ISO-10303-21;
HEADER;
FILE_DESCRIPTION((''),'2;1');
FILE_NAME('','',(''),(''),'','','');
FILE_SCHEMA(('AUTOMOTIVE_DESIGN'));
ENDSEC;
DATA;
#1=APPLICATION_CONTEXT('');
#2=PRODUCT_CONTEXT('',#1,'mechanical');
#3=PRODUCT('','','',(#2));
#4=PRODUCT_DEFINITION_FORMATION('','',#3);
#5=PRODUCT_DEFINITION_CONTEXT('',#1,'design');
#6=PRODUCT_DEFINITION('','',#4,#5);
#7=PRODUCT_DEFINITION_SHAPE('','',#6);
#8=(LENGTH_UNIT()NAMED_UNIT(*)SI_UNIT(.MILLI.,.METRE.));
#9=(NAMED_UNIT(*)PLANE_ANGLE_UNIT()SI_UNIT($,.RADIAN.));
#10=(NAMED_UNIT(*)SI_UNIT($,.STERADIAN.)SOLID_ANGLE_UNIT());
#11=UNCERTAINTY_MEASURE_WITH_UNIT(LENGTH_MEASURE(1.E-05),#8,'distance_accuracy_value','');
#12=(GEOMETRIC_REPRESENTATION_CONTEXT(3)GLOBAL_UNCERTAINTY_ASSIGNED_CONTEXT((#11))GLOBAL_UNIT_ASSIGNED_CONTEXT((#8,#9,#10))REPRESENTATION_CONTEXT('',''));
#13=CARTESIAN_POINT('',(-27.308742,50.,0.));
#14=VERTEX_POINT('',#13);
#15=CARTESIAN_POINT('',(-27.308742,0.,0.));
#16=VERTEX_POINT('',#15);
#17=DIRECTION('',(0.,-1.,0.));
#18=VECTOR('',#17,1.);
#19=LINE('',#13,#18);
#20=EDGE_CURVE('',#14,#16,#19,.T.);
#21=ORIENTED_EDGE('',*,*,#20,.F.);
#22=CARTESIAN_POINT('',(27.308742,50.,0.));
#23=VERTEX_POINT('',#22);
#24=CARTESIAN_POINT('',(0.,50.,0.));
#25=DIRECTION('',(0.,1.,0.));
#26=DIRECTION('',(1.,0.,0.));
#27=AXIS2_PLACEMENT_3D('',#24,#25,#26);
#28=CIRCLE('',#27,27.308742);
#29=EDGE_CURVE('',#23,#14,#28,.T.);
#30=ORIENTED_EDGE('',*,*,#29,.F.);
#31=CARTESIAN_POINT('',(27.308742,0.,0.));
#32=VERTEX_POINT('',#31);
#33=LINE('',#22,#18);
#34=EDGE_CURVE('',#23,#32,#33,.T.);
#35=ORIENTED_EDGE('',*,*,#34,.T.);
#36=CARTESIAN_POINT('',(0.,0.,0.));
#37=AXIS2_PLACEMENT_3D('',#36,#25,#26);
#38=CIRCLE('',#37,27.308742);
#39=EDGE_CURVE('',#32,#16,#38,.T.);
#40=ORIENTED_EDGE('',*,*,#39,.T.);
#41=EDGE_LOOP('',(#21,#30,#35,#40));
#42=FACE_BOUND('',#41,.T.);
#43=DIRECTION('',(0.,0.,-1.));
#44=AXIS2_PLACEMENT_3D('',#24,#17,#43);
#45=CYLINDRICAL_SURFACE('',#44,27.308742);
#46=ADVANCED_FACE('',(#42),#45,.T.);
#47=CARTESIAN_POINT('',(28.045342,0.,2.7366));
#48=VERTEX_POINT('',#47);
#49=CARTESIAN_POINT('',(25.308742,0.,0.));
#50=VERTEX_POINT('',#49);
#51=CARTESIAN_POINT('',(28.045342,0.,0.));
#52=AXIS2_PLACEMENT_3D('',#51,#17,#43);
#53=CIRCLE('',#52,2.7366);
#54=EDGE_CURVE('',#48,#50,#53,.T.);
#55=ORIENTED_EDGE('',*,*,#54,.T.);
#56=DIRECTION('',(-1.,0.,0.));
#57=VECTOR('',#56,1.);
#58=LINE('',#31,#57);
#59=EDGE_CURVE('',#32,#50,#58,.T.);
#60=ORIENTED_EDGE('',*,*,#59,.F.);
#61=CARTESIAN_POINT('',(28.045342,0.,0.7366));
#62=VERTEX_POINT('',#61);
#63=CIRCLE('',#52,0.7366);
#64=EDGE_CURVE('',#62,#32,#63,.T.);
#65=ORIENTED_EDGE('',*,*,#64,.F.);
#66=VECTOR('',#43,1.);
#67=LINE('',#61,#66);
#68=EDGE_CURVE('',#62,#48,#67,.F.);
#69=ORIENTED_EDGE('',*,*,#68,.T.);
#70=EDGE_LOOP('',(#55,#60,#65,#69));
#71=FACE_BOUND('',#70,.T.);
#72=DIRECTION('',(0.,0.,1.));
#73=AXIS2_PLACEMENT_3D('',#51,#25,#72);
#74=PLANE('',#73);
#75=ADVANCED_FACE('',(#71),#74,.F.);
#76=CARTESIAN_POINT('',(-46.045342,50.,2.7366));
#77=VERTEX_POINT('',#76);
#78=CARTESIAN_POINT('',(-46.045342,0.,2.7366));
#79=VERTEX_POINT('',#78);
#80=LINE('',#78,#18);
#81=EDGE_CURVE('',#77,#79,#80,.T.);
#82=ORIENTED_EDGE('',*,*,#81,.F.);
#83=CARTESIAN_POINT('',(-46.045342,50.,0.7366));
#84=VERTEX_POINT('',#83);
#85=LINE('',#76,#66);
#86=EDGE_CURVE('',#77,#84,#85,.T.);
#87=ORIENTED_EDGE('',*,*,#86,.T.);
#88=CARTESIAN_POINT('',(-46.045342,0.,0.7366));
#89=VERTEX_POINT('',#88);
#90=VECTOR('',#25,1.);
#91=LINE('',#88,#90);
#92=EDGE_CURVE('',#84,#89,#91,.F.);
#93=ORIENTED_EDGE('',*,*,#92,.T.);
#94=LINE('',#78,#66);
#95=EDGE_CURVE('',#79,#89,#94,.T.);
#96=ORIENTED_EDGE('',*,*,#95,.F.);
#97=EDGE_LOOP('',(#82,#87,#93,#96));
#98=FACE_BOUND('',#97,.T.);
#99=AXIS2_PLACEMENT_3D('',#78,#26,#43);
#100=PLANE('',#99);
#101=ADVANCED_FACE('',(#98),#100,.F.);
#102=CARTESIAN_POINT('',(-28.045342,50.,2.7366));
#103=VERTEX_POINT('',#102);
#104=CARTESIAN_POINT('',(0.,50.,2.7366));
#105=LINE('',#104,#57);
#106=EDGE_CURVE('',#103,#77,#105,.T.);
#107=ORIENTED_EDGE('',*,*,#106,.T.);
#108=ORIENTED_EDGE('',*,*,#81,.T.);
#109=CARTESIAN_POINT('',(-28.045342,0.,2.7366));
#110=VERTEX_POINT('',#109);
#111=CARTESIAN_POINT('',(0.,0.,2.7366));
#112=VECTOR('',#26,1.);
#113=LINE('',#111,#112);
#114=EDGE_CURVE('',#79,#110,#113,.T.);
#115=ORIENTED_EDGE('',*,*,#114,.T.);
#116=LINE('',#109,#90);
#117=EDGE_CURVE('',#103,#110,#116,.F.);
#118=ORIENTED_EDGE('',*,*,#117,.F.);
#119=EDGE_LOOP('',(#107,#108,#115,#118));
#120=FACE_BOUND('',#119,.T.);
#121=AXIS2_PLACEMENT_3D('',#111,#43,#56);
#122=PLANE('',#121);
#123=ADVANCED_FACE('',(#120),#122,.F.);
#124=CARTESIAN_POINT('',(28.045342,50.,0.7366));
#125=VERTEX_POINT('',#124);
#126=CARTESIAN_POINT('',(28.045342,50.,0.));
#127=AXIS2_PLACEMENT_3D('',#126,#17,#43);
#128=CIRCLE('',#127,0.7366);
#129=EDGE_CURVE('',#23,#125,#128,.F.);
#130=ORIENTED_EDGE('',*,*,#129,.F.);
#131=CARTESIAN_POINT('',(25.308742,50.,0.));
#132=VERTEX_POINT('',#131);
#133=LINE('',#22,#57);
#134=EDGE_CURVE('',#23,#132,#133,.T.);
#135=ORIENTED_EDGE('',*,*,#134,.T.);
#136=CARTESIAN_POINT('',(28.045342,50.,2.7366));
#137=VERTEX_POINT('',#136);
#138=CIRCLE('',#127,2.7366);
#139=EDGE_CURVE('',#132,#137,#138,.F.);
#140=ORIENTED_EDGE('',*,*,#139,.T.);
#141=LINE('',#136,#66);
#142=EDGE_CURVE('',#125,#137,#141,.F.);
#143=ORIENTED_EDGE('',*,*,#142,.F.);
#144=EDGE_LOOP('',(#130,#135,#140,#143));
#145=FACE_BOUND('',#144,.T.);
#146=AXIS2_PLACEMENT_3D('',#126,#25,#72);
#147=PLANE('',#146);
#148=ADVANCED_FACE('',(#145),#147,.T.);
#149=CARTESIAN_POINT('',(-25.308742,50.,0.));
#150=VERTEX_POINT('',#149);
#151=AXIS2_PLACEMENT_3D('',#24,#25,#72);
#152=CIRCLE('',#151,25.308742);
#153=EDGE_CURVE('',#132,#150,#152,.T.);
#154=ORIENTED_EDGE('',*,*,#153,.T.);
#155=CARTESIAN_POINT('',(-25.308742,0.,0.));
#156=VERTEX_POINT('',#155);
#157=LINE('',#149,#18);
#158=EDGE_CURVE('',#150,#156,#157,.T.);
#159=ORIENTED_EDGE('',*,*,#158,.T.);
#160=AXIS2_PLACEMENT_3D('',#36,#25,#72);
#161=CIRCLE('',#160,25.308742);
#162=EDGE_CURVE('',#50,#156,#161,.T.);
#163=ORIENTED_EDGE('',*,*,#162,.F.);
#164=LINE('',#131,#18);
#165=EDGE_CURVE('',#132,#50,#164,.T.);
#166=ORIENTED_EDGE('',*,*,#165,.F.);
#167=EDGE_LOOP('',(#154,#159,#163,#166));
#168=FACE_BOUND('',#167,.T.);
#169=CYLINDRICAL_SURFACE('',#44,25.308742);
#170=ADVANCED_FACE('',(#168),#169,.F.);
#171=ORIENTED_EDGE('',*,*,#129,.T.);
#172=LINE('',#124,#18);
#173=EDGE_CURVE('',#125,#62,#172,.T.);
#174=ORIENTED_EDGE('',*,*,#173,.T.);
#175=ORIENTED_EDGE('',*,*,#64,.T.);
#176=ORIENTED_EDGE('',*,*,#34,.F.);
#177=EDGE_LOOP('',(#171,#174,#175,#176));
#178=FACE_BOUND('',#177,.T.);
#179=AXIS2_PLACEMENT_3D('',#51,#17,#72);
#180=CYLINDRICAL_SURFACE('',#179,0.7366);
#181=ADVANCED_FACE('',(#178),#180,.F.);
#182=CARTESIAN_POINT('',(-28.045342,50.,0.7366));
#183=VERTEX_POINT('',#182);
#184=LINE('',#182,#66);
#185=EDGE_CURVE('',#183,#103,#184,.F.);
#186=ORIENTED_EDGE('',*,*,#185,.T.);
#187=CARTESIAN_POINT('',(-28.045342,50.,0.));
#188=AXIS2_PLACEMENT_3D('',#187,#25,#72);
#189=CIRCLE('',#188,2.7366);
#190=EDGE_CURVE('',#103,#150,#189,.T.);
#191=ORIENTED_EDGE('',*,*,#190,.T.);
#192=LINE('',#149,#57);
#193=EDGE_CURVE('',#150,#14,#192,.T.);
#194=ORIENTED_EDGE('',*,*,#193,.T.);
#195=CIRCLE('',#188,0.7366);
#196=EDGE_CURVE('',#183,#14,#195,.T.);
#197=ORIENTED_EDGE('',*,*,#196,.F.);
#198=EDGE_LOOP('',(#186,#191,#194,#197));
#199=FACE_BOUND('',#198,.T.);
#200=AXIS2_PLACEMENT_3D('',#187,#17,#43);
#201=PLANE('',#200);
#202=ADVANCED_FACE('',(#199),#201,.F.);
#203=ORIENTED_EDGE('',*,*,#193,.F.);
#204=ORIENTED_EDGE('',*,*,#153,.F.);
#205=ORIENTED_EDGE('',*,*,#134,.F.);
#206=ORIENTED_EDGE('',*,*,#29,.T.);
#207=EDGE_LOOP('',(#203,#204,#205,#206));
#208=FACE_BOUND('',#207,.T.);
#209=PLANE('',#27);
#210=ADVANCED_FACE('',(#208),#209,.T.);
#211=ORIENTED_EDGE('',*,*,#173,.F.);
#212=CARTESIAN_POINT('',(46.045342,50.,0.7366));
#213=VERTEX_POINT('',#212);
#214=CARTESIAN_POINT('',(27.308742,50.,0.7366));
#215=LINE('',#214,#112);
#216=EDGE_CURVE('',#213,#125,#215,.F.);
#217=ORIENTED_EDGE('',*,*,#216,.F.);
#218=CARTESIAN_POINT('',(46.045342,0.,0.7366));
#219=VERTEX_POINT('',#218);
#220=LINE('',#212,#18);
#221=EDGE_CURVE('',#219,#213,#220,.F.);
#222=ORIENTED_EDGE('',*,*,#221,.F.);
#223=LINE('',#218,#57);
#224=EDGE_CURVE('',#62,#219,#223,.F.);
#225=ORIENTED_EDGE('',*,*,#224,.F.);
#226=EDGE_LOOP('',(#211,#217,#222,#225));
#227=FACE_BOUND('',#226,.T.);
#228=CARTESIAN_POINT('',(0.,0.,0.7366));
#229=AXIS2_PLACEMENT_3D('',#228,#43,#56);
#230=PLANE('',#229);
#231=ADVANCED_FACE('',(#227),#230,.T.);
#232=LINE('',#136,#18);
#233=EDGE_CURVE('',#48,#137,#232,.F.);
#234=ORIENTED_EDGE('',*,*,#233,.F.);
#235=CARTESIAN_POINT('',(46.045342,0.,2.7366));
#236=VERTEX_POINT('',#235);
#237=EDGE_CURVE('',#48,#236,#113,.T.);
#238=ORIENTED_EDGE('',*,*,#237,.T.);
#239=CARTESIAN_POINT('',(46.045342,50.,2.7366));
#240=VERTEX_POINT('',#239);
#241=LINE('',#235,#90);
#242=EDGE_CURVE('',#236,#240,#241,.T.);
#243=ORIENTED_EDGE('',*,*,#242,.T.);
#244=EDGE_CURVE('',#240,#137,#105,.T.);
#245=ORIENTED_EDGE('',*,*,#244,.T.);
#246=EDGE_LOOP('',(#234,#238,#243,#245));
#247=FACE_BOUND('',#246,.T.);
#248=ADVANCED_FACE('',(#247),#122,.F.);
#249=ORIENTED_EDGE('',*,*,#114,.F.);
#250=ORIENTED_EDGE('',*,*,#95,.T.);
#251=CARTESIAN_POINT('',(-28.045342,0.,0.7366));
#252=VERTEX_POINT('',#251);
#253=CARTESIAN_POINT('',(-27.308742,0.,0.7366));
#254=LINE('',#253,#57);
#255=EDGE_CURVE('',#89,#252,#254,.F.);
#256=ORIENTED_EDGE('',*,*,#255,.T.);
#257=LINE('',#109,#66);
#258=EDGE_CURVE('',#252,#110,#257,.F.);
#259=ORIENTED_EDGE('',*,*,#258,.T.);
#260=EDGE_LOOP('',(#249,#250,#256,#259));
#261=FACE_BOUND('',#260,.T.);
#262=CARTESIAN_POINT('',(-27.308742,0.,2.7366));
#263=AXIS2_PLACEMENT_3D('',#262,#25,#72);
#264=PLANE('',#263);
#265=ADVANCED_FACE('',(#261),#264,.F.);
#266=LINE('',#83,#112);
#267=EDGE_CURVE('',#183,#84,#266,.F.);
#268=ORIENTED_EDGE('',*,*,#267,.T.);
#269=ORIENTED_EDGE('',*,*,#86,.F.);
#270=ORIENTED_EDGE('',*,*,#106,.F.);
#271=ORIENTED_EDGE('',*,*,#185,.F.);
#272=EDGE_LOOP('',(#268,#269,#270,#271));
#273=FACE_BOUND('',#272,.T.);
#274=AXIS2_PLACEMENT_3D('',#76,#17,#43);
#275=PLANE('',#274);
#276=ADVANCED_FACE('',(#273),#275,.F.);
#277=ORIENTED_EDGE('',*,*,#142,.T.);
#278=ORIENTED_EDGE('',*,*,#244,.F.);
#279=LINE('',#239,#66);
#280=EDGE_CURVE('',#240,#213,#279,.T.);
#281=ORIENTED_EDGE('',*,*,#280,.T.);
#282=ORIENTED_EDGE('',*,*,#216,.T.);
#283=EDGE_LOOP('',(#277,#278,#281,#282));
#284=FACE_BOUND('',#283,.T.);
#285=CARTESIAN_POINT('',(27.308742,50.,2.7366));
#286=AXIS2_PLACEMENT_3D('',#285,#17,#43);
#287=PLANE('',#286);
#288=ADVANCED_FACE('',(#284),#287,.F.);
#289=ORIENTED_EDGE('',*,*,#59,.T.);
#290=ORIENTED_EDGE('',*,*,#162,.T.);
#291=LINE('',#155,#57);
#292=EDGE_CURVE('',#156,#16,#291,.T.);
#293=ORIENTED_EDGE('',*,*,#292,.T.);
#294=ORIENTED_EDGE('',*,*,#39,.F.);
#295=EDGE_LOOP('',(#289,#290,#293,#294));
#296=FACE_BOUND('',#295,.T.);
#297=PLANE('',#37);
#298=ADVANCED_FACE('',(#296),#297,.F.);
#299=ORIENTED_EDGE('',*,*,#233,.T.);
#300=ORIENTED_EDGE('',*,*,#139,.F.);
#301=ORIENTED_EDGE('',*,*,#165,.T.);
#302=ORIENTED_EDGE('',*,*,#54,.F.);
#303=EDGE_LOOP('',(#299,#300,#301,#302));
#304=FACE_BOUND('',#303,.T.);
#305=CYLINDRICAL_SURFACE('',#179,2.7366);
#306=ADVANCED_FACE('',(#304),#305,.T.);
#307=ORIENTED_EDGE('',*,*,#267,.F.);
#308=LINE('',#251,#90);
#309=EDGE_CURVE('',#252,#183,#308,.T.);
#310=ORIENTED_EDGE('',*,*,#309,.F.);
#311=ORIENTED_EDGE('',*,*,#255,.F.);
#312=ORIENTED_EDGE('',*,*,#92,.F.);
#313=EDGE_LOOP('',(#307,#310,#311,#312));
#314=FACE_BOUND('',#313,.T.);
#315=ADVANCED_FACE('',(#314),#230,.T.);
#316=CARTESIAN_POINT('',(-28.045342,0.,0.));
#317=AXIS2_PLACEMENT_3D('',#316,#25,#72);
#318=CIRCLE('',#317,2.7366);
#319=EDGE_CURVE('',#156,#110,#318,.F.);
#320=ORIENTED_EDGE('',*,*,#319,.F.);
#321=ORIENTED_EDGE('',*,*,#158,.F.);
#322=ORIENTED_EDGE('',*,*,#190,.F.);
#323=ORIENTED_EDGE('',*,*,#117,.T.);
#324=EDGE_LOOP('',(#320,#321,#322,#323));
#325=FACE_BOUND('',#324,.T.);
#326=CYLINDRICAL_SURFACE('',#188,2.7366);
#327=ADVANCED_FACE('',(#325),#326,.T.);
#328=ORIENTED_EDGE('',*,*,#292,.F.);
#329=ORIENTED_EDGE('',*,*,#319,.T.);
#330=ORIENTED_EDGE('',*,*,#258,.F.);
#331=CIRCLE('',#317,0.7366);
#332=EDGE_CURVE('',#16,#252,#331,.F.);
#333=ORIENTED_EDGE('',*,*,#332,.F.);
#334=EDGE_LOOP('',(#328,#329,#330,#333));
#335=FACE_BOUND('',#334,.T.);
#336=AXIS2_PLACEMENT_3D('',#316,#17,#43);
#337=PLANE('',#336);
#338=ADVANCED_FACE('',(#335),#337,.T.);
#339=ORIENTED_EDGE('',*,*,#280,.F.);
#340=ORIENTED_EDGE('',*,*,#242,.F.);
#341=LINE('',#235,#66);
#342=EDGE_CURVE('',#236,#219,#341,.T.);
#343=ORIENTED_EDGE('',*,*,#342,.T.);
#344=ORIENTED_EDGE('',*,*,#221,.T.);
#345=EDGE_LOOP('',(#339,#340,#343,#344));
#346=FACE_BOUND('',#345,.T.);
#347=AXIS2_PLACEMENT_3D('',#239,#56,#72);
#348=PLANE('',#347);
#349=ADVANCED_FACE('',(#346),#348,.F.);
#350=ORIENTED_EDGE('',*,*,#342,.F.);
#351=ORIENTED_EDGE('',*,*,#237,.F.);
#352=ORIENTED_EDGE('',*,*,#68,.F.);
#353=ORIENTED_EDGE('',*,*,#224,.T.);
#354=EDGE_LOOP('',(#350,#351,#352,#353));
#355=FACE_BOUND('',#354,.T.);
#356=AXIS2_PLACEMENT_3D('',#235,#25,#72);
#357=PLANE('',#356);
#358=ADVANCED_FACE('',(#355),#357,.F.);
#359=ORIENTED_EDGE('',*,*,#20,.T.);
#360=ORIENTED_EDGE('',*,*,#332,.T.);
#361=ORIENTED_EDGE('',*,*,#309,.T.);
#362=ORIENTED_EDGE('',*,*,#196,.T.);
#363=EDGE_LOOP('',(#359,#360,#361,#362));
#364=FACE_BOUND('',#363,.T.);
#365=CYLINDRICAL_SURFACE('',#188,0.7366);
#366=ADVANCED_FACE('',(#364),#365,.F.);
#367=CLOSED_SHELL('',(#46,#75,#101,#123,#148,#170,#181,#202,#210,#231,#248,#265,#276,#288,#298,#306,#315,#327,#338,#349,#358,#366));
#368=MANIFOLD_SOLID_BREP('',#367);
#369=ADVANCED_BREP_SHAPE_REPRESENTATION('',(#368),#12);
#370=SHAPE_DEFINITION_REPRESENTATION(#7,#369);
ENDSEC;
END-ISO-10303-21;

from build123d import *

# Parameters (mm, degrees)
BASE_FLANGE1_DEPTH      = 50
EDGE_FLANGE1_DEPTH      = 50
EDGE_FLANGE1_BEND_DEPTH = 50


# Sheet-metal steps are written as plain solids
with BuildPart() as part:
    # Sketch1 → Base-Flange1 (new body)
    with BuildSketch(Plane(origin=(0, 0, 0), x_dir=(1, 0, 0), z_dir=(0, 1, 0))):
        with BuildLine():
            ThreePointArc((25.308741749, 0), (0, 25.308741749), (-25.308741749, 0))
            Line((-25.308741749, 0), (-27.308741749, 0))
            ThreePointArc((-27.308741749, 0), (0, 27.308741749), (27.308741749, 0))
            Line((27.308741749, 0), (25.308741749, 0))
        make_face()
    extrude(amount=BASE_FLANGE1_DEPTH)

    # Edge-Flange1 section (across the edge) → Edge-Flange1 (add)
    with BuildSketch(Plane(origin=(27.308741749, 50, 0.7366), x_dir=(0, 0, -1), z_dir=(0, -1, 0))):
        with BuildLine():
            Line((-2, 0.7366), (-2, 18.7366))
            Line((-2, 18.7366), (0, 18.7366))
            Line((0, 18.7366), (0, 0.7366))
            ThreePointArc((0, 0.7366), (0.215745145, 0.215745145), (0.7366, 0))
            Line((0.7366, 0), (0.7366, -2))
            ThreePointArc((0.7366, -2), (-1.198468417, -1.198468417), (-2, 0.7366))
        make_face()
    extrude(amount=EDGE_FLANGE1_DEPTH)

    # Edge-Flange1 section 2 (across the edge) → Edge-Flange1 bend (add)
    with BuildSketch(Plane(origin=(-27.308741749, 0, 0.7366), x_dir=(0, 0, -1), z_dir=(0, 1, 0))):
        with BuildLine():
            Line((-2, 0.7366), (-2, 18.7366))
            Line((-2, 18.7366), (0, 18.7366))
            Line((0, 18.7366), (0, 0.7366))
            ThreePointArc((0, 0.7366), (0.215745145, 0.215745145), (0.7366, 0))
            Line((0.7366, 0), (0.7366, -2))
            ThreePointArc((0.7366, -2), (-1.198468417, -1.198468417), (-2, 0.7366))
        make_face()
    extrude(amount=EDGE_FLANGE1_BEND_DEPTH)


solid = part.part
